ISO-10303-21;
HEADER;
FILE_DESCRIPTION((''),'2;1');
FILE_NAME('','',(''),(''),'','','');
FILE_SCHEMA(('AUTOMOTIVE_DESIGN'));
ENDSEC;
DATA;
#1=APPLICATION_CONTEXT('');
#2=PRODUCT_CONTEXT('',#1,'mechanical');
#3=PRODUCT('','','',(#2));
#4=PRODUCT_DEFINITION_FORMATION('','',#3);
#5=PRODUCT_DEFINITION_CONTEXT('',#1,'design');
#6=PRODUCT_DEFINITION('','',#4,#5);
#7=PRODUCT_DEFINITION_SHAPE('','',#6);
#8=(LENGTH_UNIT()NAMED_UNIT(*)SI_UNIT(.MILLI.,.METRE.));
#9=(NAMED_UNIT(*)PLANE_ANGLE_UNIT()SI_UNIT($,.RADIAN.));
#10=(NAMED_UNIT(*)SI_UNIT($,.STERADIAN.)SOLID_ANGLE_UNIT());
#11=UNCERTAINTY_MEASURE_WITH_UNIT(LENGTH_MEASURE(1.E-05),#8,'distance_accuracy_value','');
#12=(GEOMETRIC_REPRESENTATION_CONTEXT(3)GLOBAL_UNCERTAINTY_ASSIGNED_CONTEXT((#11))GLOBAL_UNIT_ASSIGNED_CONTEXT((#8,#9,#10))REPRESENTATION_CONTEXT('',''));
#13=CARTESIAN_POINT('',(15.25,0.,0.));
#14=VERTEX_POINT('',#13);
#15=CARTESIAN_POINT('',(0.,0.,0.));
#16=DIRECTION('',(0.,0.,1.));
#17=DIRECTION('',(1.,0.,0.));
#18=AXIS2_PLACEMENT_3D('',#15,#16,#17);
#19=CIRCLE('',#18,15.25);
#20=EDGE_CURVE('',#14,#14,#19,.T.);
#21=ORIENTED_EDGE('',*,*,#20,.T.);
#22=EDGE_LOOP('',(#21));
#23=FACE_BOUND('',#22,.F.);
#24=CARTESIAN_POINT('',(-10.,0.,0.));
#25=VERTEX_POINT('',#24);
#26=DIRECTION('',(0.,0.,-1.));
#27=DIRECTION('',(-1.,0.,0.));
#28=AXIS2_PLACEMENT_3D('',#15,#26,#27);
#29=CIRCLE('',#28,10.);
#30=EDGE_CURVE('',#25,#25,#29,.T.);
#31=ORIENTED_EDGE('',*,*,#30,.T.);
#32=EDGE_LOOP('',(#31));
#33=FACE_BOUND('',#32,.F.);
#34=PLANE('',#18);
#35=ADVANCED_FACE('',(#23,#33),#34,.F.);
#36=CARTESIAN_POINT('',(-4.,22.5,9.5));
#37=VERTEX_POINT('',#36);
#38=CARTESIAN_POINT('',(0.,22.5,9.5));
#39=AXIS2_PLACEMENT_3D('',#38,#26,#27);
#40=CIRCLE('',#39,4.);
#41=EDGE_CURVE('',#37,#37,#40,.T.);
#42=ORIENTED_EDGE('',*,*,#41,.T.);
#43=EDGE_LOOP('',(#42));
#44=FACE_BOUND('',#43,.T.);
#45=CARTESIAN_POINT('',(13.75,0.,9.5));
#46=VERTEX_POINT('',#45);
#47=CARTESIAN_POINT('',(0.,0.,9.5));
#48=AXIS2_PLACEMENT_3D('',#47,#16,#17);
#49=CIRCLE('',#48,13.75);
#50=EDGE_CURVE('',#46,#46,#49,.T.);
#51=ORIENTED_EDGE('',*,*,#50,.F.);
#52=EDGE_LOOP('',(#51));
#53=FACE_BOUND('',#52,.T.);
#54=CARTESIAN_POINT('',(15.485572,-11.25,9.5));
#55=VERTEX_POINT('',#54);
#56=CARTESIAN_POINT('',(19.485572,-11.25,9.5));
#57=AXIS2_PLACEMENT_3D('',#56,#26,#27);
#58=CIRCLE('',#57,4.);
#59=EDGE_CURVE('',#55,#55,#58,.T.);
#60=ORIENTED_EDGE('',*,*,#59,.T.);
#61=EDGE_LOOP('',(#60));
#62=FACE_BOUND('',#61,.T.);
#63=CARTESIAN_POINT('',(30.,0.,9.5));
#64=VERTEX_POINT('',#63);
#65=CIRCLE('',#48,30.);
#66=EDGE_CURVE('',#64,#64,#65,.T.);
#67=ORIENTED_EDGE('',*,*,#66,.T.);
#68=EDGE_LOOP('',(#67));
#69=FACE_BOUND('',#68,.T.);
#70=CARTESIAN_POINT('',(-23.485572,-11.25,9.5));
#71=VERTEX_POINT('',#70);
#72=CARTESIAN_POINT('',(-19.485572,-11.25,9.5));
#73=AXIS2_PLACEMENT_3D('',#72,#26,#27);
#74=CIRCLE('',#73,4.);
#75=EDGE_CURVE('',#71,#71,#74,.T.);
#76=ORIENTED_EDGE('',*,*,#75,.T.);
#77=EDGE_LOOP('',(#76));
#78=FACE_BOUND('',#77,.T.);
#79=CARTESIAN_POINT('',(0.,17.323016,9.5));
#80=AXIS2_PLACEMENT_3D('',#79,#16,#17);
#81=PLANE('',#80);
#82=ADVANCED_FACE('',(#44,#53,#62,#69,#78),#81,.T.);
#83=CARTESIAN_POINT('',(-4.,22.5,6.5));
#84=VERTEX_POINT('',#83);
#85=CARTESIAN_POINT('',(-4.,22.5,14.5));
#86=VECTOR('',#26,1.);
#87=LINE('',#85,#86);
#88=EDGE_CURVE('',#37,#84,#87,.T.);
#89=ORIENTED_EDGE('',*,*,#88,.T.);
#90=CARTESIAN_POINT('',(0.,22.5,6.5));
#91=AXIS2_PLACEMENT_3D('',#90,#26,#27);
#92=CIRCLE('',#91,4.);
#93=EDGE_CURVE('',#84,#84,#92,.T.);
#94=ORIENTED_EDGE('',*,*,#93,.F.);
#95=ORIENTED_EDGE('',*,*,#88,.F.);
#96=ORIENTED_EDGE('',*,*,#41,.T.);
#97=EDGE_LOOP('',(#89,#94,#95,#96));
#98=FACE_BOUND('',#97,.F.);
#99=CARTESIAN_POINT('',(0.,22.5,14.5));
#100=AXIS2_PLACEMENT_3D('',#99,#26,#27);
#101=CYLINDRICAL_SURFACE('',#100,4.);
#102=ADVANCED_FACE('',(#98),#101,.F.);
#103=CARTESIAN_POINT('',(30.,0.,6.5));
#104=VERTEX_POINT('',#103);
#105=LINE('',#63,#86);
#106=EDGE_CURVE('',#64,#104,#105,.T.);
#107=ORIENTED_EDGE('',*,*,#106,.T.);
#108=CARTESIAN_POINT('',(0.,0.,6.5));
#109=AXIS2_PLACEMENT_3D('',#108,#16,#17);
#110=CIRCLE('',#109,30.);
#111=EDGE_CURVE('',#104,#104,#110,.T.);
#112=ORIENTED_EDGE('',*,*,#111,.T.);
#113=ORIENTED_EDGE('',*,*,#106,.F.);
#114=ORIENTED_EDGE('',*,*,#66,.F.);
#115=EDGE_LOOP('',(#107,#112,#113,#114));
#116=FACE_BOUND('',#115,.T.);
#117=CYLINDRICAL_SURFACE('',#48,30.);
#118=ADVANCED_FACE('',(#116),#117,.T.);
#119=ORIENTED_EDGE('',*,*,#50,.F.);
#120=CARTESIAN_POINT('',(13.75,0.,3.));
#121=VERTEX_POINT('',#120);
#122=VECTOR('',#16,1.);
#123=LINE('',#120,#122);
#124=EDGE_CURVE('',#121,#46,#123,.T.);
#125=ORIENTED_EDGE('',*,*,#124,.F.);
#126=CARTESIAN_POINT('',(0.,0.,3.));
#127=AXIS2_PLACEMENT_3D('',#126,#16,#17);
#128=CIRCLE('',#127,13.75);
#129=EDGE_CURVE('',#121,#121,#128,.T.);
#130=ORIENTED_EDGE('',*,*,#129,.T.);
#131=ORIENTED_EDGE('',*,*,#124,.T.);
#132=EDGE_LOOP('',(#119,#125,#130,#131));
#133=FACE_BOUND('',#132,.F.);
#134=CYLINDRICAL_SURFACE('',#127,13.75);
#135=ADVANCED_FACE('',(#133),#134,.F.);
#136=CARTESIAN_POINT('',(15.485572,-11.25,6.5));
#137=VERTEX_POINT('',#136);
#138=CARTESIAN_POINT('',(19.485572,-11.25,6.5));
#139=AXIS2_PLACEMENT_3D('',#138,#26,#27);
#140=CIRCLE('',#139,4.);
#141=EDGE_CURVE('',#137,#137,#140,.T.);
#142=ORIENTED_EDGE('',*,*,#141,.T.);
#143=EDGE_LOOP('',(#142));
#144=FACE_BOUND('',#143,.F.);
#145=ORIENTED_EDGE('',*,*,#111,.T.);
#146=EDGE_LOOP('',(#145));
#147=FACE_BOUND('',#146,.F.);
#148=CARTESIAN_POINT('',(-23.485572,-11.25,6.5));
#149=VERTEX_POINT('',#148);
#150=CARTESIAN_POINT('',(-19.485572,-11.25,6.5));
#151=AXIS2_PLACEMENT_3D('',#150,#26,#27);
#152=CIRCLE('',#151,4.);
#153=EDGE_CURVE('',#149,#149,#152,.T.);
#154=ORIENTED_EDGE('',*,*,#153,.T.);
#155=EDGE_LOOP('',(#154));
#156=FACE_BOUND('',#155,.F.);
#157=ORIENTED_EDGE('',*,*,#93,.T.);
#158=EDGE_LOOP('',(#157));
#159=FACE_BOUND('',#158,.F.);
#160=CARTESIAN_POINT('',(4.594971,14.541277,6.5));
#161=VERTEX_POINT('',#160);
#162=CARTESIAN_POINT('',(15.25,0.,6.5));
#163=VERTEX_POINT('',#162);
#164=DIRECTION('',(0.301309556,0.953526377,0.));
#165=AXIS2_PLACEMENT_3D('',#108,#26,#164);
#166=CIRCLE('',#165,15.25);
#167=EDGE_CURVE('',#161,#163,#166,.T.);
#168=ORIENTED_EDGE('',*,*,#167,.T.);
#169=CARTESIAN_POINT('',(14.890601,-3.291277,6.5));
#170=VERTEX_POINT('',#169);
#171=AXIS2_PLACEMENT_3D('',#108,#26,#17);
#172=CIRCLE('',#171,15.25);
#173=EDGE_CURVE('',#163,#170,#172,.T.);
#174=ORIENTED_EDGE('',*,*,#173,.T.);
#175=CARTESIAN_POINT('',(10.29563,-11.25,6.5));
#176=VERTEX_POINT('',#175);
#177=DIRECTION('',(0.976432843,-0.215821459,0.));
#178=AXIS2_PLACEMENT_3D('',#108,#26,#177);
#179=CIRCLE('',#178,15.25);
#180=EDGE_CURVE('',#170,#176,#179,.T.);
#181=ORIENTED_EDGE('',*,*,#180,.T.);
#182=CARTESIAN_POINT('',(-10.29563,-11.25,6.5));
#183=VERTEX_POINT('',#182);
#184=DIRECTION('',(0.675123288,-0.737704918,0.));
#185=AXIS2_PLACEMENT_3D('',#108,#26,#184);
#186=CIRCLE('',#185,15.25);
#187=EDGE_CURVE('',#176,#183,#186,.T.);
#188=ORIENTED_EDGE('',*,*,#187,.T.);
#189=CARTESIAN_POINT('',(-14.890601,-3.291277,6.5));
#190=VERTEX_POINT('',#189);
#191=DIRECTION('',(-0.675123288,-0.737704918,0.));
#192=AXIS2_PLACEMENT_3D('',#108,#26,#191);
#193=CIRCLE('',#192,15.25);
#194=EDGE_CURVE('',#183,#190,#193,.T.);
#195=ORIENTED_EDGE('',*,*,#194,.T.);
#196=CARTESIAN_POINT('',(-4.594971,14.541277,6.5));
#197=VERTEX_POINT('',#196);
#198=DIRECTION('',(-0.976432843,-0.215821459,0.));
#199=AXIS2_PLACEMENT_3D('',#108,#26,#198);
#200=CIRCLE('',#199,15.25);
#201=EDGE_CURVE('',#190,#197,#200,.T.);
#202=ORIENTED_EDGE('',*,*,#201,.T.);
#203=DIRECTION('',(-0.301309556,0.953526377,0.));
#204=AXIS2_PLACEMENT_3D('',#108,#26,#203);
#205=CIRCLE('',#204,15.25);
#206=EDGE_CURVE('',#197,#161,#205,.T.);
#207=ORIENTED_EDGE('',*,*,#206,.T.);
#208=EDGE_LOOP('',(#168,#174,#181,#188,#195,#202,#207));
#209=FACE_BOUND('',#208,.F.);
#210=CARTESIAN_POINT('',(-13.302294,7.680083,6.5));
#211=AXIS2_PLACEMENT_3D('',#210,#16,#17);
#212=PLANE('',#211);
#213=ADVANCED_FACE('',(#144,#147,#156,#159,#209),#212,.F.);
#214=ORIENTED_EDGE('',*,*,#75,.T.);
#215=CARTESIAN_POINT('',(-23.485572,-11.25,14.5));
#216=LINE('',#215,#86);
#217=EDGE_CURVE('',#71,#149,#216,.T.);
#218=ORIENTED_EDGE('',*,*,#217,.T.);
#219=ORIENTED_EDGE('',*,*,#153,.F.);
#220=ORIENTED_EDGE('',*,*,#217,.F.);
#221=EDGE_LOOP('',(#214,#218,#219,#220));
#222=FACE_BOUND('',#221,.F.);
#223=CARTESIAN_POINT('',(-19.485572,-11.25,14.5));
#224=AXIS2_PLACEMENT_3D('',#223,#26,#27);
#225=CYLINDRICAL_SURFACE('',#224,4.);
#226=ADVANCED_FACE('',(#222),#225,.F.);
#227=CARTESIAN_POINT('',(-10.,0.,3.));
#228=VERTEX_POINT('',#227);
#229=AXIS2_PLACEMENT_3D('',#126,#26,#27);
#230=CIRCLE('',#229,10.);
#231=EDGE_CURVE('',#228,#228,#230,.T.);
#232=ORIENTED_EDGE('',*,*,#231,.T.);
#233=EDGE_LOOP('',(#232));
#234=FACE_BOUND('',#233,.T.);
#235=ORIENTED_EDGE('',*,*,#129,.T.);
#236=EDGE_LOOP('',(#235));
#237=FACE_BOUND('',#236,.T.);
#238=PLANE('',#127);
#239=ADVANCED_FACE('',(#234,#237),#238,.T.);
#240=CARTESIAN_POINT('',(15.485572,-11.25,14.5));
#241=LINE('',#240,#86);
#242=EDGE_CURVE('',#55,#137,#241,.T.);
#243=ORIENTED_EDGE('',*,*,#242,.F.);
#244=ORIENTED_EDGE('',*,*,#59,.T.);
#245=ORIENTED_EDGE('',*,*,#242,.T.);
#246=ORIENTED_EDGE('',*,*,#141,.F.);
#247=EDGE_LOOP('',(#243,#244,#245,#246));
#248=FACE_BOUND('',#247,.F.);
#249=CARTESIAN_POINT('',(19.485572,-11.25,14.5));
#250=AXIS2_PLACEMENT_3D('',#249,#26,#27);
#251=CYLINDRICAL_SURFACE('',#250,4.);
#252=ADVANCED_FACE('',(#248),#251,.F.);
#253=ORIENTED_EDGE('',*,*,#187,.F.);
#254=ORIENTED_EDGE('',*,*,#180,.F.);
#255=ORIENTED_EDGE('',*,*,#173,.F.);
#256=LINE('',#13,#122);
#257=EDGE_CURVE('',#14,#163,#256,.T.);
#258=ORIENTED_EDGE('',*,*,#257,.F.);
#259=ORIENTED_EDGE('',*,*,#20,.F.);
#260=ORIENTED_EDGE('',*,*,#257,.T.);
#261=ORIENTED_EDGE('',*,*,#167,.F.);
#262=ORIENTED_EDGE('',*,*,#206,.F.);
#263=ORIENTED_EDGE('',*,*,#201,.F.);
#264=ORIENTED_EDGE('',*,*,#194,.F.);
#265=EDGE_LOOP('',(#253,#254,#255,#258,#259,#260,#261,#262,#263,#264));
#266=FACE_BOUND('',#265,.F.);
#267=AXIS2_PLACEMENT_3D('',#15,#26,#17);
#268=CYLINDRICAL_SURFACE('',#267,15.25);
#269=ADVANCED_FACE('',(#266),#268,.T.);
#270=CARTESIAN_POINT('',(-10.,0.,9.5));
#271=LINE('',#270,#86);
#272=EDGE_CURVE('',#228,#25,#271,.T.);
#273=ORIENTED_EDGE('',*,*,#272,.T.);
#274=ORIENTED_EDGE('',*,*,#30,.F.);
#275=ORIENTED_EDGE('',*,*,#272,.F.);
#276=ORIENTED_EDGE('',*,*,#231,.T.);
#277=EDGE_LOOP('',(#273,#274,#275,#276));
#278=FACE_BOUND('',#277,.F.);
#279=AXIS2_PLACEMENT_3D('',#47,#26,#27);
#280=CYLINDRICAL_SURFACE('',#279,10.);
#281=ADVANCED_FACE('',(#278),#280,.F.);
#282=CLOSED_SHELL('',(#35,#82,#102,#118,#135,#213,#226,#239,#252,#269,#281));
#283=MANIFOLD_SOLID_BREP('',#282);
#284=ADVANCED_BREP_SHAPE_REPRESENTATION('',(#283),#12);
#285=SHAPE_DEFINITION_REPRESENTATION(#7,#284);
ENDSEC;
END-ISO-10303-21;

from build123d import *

# Parameters (mm, degrees)
F0_R           = 15.25
F1_DEPTH       = 9.5
F2_R           = 30
F3_DEPTH       = 3
F4_DEPTH       = 3
F5_DEPTH       = 3
F6_D           = 8
F6_DEPTH       = 5
F6_TIP         = 2.4034424761
F7_D           = 8
F7_DEPTH       = 5
F7_TIP         = 2.4034424761
F8_D           = 8
F8_DEPTH       = 5
F8_TIP         = 2.4034424761
F9_D           = 20
F9_DEPTH       = 50
F9_CBORE_D     = 27.5
F9_CBORE_DEPTH = 6.5
F9_TIP         = 6.0086061903


with BuildPart() as f1:
    # F0 (on Top) → F1 (new body)
    with BuildSketch(Plane.XY):
        Circle(F0_R)
    extrude(amount=F1_DEPTH)



with BuildPart() as f3:
    # F2 (on face) → F3 (new body)
    with BuildSketch(Plane.XY.offset(9.5)):
        Circle(F2_R)
        with BuildLine():
            ThreePointArc((0, 22.5), (15.9099025767, 15.9099025767), (22.5, 0))
            ThreePointArc((22.5, 0), (21.7333310915, -5.8234285148), (19.4855715851, -11.25))
            ThreePointArc((19.4855715851, -11.25), (0, -22.5), (-19.4855715851, -11.25))
            ThreePointArc((-19.4855715851, -11.25), (-19.4855715851, 11.25), (0, 22.5))
        make_face(mode=Mode.SUBTRACT)
    extrude(amount=-F3_DEPTH)


with BuildPart() as f1_1:
    add(f1.part)

    add(f3.part)  # F3#2 merges F3
    # F2 (on face) → F3, piece 2 (join)
    with BuildSketch(Plane.XY.offset(9.5)):
        with BuildLine():
            Line((-14.8906008631, -3.2912772501), (-19.4855715851, -11.25))
            Line((-19.4855715851, -11.25), (-10.295630141, -11.25))
            ThreePointArc((-10.295630141, -11.25), (-13.2068874077, -7.625), (-14.8906008631, -3.2912772501))
        make_face()
    extrude(amount=-F3_DEPTH)

    # F2 (on face) → F4 (join)
    with BuildSketch(Plane.XY.offset(9.5)):
        with BuildLine():
            Line((-4.5949707221, 14.5412772501), (0, 22.5))
            ThreePointArc((0, 22.5), (-19.4855715851, 11.25), (-19.4855715851, -11.25))
            Line((-19.4855715851, -11.25), (-14.8906008631, -3.2912772501))
            ThreePointArc((-14.8906008631, -3.2912772501), (-13.2068874077, 7.625), (-4.5949707221, 14.5412772501))
        make_face()
        with BuildLine():
            ThreePointArc((-19.4855715851, -11.25), (0, -22.5), (19.4855715851, -11.25))
            Line((19.4855715851, -11.25), (10.295630141, -11.25))
            ThreePointArc((10.295630141, -11.25), (0, -15.25), (-10.295630141, -11.25))
            Line((-10.295630141, -11.25), (-19.4855715851, -11.25))
        make_face()
        with BuildLine():
            ThreePointArc((19.4855715851, -11.25), (21.7333310915, -5.8234285148), (22.5, 0))
            ThreePointArc((22.5, 0), (15.9099025767, 15.9099025767), (0, 22.5))
            Line((0, 22.5), (4.5949707221, 14.5412772501))
            ThreePointArc((4.5949707221, 14.5412772501), (12.3011341654, 9.0135785482), (15.25, 0))
            ThreePointArc((15.25, 0), (15.1598839567, -1.655420919), (14.8906008631, -3.2912772501))
            Line((14.8906008631, -3.2912772501), (19.4855715851, -11.25))
        make_face()
    extrude(amount=-F4_DEPTH)

    # F2 (on face) → F5 (join)
    with BuildSketch(Plane.XY.offset(9.5)):
        with BuildLine():
            Line((4.5949707221, 14.5412772501), (0, 22.5))
            Line((0, 22.5), (-4.5949707221, 14.5412772501))
            ThreePointArc((-4.5949707221, 14.5412772501), (0, 15.25), (4.5949707221, 14.5412772501))
        make_face()
        with BuildLine():
            ThreePointArc((-19.4855715851, -11.25), (0, -22.5), (19.4855715851, -11.25))
            Line((19.4855715851, -11.25), (10.295630141, -11.25))
            ThreePointArc((10.295630141, -11.25), (0, -15.25), (-10.295630141, -11.25))
            Line((-10.295630141, -11.25), (-19.4855715851, -11.25))
        make_face()
        with BuildLine():
            Line((10.295630141, -11.25), (19.4855715851, -11.25))
            Line((19.4855715851, -11.25), (14.8906008631, -3.2912772501))
            ThreePointArc((14.8906008631, -3.2912772501), (13.2068874077, -7.625), (10.295630141, -11.25))
        make_face()
    extrude(amount=-F5_DEPTH)

    # F6
    with Locations(Plane.XY.offset(9.5)):
        with Locations((-19.4855715851, -11.25)):
            Hole(F6_D / 2, depth=F6_DEPTH)
            with Locations((0, 0, -(F6_DEPTH + F6_TIP / 2))):  # 118° drill point
                Cone(0, F6_D / 2, F6_TIP, mode=Mode.SUBTRACT)

    # F7
    with Locations(Plane.XY.offset(9.5)):
        with Locations((0, 22.5)):
            Hole(F7_D / 2, depth=F7_DEPTH)
            with Locations((0, 0, -(F7_DEPTH + F7_TIP / 2))):  # 118° drill point
                Cone(0, F7_D / 2, F7_TIP, mode=Mode.SUBTRACT)

    # F8
    with Locations(Plane.XY.offset(9.5)):
        with Locations((19.4855715851, -11.25)):
            Hole(F8_D / 2, depth=F8_DEPTH)
            with Locations((0, 0, -(F8_DEPTH + F8_TIP / 2))):  # 118° drill point
                Cone(0, F8_D / 2, F8_TIP, mode=Mode.SUBTRACT)

    # F9
    with Locations(Plane.XY.offset(9.5)):
        with Locations((0, 0)):
            CounterBoreHole(F9_D / 2, F9_CBORE_D / 2, F9_CBORE_DEPTH, depth=F9_DEPTH)
            with Locations((0, 0, -(F9_DEPTH + F9_TIP / 2))):  # 118° drill point
                Cone(0, F9_D / 2, F9_TIP, mode=Mode.SUBTRACT)


solid = f1_1.part
